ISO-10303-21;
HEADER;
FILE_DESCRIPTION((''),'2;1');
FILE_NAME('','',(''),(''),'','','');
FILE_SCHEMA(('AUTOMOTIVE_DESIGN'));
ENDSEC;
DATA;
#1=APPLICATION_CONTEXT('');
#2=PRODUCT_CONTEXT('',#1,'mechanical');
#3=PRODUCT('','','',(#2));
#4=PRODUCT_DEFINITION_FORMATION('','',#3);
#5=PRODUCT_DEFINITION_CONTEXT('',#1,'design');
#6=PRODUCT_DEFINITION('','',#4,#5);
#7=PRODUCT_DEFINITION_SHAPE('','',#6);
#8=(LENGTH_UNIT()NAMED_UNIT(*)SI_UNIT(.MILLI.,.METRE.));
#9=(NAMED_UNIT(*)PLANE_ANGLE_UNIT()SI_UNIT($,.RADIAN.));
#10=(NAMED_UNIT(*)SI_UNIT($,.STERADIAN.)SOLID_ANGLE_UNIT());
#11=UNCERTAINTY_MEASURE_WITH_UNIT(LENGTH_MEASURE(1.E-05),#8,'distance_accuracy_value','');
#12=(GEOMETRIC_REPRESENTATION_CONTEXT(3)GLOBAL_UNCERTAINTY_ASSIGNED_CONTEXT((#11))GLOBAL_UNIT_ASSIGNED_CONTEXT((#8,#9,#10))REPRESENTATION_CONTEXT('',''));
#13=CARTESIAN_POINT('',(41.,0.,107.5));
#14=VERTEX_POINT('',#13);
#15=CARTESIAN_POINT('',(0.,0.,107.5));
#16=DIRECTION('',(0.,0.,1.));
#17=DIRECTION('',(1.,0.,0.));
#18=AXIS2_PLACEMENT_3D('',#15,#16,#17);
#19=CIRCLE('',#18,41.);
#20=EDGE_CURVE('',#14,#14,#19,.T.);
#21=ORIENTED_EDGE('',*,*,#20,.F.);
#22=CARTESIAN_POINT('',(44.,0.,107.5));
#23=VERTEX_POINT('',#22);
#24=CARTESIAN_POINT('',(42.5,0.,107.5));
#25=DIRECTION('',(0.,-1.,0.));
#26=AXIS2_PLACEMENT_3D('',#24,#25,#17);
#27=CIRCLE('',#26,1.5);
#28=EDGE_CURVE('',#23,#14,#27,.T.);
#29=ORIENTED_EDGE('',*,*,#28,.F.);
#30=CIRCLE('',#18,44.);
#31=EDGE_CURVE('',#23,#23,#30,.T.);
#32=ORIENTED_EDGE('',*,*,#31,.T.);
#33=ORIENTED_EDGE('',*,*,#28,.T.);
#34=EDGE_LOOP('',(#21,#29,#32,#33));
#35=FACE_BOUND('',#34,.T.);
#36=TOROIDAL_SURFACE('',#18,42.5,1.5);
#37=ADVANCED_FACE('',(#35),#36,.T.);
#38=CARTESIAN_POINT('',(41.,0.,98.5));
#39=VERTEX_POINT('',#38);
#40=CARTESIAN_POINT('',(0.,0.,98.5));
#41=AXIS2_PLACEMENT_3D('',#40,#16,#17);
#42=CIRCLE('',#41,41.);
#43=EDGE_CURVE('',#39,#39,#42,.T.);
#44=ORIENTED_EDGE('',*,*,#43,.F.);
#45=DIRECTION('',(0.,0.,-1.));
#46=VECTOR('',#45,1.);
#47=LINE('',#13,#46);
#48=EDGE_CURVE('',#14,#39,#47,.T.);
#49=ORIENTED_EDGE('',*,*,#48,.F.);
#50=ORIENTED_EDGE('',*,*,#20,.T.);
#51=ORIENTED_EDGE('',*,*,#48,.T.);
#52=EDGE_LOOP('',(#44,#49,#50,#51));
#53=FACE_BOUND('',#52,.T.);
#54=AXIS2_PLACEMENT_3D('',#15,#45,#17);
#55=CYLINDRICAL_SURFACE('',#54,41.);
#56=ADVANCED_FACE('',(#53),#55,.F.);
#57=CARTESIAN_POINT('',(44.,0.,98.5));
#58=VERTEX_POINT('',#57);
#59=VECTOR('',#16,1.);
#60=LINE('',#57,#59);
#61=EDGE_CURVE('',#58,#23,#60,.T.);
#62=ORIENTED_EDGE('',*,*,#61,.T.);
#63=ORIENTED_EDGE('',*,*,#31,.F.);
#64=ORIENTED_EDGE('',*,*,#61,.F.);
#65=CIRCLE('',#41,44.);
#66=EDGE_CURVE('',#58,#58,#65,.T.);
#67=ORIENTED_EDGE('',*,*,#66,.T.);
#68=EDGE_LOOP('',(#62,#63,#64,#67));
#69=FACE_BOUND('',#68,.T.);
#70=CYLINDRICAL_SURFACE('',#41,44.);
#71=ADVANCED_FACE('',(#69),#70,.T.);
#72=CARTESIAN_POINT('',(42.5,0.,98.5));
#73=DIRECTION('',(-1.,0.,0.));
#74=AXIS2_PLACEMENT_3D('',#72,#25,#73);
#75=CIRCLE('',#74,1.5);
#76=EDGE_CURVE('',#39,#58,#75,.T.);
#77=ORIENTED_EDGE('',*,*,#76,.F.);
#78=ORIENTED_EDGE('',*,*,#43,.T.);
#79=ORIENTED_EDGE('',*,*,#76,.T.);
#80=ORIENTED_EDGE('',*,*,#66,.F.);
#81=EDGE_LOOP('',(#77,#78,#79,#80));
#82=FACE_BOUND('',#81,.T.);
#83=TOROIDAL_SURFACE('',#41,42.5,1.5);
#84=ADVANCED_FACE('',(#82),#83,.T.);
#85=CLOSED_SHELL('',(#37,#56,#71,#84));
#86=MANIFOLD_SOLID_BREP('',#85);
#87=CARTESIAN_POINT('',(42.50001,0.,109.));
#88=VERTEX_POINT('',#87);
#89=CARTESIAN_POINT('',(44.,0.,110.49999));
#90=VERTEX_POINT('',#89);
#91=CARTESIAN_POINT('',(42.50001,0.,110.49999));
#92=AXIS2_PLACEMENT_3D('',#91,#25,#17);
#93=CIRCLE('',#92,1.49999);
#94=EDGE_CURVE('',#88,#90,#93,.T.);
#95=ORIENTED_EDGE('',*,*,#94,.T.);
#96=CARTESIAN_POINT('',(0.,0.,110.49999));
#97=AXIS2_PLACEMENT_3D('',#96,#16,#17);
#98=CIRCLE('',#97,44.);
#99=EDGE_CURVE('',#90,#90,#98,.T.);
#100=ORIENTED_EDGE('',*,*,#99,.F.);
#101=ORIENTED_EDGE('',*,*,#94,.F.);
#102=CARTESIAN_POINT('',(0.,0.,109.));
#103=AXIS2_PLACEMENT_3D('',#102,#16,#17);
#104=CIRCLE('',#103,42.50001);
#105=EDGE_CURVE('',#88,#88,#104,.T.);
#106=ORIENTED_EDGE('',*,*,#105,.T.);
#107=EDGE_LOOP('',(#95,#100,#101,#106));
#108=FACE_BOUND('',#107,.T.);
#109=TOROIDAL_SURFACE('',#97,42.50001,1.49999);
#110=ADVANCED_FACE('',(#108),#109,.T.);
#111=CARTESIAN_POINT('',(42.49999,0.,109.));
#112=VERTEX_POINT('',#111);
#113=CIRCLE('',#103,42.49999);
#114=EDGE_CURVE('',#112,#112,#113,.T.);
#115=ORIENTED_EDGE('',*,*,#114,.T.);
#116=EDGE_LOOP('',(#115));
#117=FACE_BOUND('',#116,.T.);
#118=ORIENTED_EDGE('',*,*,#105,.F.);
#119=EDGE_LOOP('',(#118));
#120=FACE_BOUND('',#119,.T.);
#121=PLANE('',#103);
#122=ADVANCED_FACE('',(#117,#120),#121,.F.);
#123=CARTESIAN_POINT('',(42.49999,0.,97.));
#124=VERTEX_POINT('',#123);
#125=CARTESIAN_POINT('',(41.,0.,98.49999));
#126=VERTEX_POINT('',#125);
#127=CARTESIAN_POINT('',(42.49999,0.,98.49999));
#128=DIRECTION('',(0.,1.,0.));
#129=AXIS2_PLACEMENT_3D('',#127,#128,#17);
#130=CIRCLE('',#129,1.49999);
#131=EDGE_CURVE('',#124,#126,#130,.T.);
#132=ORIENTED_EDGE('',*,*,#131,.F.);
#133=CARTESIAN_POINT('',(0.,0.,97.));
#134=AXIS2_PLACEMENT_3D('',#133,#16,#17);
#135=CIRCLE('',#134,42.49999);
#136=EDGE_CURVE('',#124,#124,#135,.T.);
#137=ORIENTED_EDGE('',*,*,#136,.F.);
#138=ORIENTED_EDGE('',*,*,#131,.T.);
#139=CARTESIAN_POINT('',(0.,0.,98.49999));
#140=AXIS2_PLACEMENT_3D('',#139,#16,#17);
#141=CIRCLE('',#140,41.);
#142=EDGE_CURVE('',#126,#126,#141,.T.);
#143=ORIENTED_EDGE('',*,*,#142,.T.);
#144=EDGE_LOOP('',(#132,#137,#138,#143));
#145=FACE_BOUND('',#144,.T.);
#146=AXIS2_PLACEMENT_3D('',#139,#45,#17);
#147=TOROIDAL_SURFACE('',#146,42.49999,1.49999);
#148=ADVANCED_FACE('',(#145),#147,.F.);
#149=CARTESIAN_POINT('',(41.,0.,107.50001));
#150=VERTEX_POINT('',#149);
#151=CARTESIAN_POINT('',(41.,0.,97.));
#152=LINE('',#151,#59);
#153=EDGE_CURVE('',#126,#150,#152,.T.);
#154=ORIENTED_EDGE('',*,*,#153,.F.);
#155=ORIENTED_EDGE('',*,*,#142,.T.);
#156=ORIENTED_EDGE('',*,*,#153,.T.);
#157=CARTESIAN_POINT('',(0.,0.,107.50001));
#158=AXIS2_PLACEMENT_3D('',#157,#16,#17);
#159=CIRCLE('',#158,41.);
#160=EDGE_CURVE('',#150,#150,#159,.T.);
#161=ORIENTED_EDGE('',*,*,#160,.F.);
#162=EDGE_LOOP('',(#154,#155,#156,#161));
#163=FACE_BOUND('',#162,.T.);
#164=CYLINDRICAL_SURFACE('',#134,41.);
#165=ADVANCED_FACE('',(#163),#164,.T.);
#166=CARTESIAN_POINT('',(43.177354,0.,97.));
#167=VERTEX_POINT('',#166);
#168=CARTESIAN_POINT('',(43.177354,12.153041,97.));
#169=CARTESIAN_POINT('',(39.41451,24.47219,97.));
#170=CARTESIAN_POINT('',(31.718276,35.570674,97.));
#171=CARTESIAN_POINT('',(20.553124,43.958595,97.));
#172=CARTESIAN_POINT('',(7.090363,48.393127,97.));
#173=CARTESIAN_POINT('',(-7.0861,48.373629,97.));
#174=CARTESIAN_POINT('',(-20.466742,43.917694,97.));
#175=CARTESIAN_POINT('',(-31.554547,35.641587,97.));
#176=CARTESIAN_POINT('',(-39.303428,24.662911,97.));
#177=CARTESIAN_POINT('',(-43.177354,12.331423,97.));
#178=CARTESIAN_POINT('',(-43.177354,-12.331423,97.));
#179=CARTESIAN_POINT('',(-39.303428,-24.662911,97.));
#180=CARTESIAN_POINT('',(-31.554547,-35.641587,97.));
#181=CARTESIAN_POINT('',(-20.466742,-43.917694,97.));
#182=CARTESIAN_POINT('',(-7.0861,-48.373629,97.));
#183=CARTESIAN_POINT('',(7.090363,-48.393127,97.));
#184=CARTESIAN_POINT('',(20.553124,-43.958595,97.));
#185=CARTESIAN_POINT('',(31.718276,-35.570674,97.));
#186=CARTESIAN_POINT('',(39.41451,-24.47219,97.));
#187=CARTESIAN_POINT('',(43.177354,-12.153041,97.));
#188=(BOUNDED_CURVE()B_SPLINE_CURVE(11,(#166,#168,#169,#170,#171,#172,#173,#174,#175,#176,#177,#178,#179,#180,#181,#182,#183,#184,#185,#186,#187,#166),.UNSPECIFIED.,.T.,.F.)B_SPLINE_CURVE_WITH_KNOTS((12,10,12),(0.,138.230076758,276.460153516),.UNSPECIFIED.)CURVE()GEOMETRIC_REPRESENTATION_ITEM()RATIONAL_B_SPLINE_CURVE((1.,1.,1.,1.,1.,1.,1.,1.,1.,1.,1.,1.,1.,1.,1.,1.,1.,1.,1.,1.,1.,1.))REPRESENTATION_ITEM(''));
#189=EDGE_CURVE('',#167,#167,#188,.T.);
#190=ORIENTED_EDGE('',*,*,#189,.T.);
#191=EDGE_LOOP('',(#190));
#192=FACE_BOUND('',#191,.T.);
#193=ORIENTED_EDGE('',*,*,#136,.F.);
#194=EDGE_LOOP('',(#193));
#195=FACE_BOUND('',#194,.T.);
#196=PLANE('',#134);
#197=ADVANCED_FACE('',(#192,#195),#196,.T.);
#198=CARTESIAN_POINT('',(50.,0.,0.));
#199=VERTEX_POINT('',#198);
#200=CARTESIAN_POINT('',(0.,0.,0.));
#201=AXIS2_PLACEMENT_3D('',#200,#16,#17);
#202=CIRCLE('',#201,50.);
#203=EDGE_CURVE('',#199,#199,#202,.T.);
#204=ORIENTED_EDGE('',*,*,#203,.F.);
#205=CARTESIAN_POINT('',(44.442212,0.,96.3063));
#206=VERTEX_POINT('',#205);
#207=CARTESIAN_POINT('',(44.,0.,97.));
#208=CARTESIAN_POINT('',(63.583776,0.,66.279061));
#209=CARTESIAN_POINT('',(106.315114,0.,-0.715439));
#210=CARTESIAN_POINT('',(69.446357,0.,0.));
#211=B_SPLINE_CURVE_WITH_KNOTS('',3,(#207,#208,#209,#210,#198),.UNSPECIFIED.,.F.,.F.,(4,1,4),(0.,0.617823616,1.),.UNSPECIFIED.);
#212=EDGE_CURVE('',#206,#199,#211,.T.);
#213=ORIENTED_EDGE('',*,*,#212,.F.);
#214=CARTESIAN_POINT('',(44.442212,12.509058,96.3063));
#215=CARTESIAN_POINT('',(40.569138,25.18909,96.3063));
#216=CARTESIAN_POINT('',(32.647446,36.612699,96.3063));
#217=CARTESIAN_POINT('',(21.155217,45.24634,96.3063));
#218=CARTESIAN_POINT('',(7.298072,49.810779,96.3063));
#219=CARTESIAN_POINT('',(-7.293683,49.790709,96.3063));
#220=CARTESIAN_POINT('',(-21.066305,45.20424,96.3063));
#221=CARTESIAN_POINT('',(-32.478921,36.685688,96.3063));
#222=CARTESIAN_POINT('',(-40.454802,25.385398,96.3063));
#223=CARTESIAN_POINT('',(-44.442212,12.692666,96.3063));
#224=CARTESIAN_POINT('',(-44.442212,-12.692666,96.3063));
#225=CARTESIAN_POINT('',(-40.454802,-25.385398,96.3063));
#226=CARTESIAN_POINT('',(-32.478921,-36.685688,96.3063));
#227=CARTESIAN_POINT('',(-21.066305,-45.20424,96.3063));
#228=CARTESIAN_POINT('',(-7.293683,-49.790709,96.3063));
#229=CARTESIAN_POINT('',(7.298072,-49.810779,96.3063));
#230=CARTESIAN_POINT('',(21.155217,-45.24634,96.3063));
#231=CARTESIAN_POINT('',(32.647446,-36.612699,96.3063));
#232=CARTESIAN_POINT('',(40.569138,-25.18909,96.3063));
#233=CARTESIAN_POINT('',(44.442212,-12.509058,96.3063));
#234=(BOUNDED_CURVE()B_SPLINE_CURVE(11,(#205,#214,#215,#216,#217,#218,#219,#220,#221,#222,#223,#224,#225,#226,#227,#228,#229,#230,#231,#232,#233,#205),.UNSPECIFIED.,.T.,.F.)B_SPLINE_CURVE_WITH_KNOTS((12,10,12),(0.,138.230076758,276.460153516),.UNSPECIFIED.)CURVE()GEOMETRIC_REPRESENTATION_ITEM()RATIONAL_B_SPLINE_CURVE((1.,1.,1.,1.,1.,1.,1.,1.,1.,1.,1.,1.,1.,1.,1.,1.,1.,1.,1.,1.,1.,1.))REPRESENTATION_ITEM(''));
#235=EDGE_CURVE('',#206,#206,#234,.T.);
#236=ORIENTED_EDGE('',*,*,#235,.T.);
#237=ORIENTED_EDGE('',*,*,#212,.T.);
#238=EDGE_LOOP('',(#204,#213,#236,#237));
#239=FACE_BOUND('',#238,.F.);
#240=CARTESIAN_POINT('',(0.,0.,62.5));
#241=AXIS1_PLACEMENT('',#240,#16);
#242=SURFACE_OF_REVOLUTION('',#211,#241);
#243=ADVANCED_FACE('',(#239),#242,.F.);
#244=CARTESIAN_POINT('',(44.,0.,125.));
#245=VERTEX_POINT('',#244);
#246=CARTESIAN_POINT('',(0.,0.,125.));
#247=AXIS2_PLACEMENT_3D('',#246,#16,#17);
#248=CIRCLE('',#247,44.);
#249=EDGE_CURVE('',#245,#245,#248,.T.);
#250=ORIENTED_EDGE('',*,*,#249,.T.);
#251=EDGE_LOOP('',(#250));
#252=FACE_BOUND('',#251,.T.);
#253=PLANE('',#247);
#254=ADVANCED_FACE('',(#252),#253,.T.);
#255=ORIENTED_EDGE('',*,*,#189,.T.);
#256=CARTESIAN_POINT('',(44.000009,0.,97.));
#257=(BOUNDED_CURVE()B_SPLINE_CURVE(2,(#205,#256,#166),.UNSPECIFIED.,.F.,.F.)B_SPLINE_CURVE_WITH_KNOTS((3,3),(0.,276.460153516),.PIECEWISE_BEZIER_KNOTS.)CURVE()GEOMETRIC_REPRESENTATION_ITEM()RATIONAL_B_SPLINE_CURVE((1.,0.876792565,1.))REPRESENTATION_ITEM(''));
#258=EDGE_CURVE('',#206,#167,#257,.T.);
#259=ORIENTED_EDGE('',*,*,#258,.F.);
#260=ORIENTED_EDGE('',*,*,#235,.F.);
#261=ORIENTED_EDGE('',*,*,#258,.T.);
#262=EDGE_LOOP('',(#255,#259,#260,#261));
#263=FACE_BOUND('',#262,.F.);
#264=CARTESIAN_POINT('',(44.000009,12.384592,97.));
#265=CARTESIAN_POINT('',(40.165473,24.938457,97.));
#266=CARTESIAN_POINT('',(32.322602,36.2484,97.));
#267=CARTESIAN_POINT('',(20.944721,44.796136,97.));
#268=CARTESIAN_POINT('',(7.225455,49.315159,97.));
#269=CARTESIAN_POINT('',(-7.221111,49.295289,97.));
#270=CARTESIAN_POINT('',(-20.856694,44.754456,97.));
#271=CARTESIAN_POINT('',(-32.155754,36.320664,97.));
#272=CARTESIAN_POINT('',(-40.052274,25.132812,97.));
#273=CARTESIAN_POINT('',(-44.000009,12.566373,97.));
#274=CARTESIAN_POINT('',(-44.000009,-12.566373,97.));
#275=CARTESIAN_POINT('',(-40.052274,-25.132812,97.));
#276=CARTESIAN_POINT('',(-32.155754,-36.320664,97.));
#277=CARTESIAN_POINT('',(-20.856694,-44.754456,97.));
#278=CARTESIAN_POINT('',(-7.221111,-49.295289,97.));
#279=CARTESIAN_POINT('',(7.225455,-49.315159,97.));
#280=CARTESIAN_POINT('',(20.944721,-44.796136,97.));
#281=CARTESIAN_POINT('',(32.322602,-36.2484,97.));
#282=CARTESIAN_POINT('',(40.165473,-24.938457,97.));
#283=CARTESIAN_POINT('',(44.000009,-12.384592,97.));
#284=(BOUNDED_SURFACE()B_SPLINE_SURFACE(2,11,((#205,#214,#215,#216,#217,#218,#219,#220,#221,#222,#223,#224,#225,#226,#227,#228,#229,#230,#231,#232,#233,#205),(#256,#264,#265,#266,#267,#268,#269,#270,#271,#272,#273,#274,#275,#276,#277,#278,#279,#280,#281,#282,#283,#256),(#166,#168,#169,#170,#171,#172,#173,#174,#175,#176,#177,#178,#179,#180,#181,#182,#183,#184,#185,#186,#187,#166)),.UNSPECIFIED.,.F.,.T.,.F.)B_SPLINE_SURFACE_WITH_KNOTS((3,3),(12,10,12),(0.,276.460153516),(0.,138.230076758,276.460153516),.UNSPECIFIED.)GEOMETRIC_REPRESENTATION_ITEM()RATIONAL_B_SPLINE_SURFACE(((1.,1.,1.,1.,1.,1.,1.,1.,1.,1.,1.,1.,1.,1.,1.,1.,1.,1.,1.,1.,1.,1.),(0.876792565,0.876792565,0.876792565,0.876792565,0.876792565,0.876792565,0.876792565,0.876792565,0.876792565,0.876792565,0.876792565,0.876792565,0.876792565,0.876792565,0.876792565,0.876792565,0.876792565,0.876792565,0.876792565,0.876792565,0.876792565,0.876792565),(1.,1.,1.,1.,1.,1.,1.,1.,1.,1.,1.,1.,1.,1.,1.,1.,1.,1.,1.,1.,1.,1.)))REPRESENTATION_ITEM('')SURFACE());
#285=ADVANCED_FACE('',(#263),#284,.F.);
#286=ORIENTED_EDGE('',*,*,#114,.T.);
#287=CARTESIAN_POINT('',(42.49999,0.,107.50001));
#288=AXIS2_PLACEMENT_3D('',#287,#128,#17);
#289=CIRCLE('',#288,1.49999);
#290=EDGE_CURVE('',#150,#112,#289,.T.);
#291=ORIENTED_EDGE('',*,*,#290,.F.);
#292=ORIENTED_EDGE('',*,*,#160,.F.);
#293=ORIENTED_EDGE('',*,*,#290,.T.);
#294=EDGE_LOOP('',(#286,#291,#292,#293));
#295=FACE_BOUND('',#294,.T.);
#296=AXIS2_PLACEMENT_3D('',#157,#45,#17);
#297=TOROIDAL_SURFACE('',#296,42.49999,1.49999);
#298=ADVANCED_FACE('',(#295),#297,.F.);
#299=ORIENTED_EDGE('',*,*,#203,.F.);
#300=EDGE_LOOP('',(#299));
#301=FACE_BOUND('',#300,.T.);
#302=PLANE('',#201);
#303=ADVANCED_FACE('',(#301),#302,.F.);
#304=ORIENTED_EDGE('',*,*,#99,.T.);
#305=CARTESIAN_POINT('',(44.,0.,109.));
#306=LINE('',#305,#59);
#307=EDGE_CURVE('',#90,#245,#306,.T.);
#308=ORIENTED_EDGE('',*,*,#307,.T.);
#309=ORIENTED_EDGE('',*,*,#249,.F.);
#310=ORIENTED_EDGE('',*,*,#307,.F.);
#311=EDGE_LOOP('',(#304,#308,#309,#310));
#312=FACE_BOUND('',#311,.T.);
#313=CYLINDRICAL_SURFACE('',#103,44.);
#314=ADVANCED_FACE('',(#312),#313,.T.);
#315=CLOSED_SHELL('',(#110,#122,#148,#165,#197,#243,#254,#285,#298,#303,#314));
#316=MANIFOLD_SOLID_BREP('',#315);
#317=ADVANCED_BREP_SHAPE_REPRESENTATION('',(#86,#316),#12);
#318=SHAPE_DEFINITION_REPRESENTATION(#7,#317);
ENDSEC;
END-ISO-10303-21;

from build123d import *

# Parameters (mm, degrees)
F2_R = 1.49999


# Not quite as in the source:
# - a fillet or chamfer is up to 0.001 mm smaller than in the source, because OpenCascade refuses the exact size


with BuildPart() as f1:
    # F0 (on Front) → F1 (revolve)
    with BuildSketch(Plane.XZ):
        with BuildLine():
            Line((0, 0), (50, 0))
            add(Edge.make_bspline(
                [(44, 97), (63.5837763548, 66.2790611386), (106.3151142134, -0.7154386643), (69.4463568757, 0), (50, 0)],
                knots=[0, 0, 0, 0, 0.6178236159, 1, 1, 1, 1], degree=3))
            Line((44, 97), (41, 97))
            Line((41, 97), (41, 109))
            Line((41, 109), (44, 109))
            Line((44, 109), (44, 125))
            Line((44, 125), (0, 125))
            Line((0, 125), (0, 0))
        make_face()
    revolve(axis=Axis((0, 0, 62.5), (0, 0, 1)))

    # F2 (radius 1.5 in the source; OpenCascade refuses exactly that, so slightly less here)
    f2_edges = [f1.edges().sort_by_distance(p)[0] for p in [
        (-44, 0, 109),
        (-41, 0, 97),
        (-50, 0, 0),
        (-44, 0, 97),
        (78.864915, 0, 37.455621),
        (-41, 0, 109),
    ]]
    fillet(f2_edges, radius=F2_R)


with BuildPart() as f4:
    # F3 (on Front) → F4 (revolve)
    with BuildSketch(Plane.XZ):
        with BuildLine():
            Line((44, 98.5), (44, 107.5))
            ThreePointArc((44, 107.5), (42.5, 109), (41, 107.5))
            Line((41, 107.5), (41, 98.5))
            ThreePointArc((41, 98.5), (42.5, 97), (44, 98.5))
        make_face()
    revolve(axis=Axis((0, 0, 125), (0, 0, 1)))


solid = Compound([f1.part, f4.part])
